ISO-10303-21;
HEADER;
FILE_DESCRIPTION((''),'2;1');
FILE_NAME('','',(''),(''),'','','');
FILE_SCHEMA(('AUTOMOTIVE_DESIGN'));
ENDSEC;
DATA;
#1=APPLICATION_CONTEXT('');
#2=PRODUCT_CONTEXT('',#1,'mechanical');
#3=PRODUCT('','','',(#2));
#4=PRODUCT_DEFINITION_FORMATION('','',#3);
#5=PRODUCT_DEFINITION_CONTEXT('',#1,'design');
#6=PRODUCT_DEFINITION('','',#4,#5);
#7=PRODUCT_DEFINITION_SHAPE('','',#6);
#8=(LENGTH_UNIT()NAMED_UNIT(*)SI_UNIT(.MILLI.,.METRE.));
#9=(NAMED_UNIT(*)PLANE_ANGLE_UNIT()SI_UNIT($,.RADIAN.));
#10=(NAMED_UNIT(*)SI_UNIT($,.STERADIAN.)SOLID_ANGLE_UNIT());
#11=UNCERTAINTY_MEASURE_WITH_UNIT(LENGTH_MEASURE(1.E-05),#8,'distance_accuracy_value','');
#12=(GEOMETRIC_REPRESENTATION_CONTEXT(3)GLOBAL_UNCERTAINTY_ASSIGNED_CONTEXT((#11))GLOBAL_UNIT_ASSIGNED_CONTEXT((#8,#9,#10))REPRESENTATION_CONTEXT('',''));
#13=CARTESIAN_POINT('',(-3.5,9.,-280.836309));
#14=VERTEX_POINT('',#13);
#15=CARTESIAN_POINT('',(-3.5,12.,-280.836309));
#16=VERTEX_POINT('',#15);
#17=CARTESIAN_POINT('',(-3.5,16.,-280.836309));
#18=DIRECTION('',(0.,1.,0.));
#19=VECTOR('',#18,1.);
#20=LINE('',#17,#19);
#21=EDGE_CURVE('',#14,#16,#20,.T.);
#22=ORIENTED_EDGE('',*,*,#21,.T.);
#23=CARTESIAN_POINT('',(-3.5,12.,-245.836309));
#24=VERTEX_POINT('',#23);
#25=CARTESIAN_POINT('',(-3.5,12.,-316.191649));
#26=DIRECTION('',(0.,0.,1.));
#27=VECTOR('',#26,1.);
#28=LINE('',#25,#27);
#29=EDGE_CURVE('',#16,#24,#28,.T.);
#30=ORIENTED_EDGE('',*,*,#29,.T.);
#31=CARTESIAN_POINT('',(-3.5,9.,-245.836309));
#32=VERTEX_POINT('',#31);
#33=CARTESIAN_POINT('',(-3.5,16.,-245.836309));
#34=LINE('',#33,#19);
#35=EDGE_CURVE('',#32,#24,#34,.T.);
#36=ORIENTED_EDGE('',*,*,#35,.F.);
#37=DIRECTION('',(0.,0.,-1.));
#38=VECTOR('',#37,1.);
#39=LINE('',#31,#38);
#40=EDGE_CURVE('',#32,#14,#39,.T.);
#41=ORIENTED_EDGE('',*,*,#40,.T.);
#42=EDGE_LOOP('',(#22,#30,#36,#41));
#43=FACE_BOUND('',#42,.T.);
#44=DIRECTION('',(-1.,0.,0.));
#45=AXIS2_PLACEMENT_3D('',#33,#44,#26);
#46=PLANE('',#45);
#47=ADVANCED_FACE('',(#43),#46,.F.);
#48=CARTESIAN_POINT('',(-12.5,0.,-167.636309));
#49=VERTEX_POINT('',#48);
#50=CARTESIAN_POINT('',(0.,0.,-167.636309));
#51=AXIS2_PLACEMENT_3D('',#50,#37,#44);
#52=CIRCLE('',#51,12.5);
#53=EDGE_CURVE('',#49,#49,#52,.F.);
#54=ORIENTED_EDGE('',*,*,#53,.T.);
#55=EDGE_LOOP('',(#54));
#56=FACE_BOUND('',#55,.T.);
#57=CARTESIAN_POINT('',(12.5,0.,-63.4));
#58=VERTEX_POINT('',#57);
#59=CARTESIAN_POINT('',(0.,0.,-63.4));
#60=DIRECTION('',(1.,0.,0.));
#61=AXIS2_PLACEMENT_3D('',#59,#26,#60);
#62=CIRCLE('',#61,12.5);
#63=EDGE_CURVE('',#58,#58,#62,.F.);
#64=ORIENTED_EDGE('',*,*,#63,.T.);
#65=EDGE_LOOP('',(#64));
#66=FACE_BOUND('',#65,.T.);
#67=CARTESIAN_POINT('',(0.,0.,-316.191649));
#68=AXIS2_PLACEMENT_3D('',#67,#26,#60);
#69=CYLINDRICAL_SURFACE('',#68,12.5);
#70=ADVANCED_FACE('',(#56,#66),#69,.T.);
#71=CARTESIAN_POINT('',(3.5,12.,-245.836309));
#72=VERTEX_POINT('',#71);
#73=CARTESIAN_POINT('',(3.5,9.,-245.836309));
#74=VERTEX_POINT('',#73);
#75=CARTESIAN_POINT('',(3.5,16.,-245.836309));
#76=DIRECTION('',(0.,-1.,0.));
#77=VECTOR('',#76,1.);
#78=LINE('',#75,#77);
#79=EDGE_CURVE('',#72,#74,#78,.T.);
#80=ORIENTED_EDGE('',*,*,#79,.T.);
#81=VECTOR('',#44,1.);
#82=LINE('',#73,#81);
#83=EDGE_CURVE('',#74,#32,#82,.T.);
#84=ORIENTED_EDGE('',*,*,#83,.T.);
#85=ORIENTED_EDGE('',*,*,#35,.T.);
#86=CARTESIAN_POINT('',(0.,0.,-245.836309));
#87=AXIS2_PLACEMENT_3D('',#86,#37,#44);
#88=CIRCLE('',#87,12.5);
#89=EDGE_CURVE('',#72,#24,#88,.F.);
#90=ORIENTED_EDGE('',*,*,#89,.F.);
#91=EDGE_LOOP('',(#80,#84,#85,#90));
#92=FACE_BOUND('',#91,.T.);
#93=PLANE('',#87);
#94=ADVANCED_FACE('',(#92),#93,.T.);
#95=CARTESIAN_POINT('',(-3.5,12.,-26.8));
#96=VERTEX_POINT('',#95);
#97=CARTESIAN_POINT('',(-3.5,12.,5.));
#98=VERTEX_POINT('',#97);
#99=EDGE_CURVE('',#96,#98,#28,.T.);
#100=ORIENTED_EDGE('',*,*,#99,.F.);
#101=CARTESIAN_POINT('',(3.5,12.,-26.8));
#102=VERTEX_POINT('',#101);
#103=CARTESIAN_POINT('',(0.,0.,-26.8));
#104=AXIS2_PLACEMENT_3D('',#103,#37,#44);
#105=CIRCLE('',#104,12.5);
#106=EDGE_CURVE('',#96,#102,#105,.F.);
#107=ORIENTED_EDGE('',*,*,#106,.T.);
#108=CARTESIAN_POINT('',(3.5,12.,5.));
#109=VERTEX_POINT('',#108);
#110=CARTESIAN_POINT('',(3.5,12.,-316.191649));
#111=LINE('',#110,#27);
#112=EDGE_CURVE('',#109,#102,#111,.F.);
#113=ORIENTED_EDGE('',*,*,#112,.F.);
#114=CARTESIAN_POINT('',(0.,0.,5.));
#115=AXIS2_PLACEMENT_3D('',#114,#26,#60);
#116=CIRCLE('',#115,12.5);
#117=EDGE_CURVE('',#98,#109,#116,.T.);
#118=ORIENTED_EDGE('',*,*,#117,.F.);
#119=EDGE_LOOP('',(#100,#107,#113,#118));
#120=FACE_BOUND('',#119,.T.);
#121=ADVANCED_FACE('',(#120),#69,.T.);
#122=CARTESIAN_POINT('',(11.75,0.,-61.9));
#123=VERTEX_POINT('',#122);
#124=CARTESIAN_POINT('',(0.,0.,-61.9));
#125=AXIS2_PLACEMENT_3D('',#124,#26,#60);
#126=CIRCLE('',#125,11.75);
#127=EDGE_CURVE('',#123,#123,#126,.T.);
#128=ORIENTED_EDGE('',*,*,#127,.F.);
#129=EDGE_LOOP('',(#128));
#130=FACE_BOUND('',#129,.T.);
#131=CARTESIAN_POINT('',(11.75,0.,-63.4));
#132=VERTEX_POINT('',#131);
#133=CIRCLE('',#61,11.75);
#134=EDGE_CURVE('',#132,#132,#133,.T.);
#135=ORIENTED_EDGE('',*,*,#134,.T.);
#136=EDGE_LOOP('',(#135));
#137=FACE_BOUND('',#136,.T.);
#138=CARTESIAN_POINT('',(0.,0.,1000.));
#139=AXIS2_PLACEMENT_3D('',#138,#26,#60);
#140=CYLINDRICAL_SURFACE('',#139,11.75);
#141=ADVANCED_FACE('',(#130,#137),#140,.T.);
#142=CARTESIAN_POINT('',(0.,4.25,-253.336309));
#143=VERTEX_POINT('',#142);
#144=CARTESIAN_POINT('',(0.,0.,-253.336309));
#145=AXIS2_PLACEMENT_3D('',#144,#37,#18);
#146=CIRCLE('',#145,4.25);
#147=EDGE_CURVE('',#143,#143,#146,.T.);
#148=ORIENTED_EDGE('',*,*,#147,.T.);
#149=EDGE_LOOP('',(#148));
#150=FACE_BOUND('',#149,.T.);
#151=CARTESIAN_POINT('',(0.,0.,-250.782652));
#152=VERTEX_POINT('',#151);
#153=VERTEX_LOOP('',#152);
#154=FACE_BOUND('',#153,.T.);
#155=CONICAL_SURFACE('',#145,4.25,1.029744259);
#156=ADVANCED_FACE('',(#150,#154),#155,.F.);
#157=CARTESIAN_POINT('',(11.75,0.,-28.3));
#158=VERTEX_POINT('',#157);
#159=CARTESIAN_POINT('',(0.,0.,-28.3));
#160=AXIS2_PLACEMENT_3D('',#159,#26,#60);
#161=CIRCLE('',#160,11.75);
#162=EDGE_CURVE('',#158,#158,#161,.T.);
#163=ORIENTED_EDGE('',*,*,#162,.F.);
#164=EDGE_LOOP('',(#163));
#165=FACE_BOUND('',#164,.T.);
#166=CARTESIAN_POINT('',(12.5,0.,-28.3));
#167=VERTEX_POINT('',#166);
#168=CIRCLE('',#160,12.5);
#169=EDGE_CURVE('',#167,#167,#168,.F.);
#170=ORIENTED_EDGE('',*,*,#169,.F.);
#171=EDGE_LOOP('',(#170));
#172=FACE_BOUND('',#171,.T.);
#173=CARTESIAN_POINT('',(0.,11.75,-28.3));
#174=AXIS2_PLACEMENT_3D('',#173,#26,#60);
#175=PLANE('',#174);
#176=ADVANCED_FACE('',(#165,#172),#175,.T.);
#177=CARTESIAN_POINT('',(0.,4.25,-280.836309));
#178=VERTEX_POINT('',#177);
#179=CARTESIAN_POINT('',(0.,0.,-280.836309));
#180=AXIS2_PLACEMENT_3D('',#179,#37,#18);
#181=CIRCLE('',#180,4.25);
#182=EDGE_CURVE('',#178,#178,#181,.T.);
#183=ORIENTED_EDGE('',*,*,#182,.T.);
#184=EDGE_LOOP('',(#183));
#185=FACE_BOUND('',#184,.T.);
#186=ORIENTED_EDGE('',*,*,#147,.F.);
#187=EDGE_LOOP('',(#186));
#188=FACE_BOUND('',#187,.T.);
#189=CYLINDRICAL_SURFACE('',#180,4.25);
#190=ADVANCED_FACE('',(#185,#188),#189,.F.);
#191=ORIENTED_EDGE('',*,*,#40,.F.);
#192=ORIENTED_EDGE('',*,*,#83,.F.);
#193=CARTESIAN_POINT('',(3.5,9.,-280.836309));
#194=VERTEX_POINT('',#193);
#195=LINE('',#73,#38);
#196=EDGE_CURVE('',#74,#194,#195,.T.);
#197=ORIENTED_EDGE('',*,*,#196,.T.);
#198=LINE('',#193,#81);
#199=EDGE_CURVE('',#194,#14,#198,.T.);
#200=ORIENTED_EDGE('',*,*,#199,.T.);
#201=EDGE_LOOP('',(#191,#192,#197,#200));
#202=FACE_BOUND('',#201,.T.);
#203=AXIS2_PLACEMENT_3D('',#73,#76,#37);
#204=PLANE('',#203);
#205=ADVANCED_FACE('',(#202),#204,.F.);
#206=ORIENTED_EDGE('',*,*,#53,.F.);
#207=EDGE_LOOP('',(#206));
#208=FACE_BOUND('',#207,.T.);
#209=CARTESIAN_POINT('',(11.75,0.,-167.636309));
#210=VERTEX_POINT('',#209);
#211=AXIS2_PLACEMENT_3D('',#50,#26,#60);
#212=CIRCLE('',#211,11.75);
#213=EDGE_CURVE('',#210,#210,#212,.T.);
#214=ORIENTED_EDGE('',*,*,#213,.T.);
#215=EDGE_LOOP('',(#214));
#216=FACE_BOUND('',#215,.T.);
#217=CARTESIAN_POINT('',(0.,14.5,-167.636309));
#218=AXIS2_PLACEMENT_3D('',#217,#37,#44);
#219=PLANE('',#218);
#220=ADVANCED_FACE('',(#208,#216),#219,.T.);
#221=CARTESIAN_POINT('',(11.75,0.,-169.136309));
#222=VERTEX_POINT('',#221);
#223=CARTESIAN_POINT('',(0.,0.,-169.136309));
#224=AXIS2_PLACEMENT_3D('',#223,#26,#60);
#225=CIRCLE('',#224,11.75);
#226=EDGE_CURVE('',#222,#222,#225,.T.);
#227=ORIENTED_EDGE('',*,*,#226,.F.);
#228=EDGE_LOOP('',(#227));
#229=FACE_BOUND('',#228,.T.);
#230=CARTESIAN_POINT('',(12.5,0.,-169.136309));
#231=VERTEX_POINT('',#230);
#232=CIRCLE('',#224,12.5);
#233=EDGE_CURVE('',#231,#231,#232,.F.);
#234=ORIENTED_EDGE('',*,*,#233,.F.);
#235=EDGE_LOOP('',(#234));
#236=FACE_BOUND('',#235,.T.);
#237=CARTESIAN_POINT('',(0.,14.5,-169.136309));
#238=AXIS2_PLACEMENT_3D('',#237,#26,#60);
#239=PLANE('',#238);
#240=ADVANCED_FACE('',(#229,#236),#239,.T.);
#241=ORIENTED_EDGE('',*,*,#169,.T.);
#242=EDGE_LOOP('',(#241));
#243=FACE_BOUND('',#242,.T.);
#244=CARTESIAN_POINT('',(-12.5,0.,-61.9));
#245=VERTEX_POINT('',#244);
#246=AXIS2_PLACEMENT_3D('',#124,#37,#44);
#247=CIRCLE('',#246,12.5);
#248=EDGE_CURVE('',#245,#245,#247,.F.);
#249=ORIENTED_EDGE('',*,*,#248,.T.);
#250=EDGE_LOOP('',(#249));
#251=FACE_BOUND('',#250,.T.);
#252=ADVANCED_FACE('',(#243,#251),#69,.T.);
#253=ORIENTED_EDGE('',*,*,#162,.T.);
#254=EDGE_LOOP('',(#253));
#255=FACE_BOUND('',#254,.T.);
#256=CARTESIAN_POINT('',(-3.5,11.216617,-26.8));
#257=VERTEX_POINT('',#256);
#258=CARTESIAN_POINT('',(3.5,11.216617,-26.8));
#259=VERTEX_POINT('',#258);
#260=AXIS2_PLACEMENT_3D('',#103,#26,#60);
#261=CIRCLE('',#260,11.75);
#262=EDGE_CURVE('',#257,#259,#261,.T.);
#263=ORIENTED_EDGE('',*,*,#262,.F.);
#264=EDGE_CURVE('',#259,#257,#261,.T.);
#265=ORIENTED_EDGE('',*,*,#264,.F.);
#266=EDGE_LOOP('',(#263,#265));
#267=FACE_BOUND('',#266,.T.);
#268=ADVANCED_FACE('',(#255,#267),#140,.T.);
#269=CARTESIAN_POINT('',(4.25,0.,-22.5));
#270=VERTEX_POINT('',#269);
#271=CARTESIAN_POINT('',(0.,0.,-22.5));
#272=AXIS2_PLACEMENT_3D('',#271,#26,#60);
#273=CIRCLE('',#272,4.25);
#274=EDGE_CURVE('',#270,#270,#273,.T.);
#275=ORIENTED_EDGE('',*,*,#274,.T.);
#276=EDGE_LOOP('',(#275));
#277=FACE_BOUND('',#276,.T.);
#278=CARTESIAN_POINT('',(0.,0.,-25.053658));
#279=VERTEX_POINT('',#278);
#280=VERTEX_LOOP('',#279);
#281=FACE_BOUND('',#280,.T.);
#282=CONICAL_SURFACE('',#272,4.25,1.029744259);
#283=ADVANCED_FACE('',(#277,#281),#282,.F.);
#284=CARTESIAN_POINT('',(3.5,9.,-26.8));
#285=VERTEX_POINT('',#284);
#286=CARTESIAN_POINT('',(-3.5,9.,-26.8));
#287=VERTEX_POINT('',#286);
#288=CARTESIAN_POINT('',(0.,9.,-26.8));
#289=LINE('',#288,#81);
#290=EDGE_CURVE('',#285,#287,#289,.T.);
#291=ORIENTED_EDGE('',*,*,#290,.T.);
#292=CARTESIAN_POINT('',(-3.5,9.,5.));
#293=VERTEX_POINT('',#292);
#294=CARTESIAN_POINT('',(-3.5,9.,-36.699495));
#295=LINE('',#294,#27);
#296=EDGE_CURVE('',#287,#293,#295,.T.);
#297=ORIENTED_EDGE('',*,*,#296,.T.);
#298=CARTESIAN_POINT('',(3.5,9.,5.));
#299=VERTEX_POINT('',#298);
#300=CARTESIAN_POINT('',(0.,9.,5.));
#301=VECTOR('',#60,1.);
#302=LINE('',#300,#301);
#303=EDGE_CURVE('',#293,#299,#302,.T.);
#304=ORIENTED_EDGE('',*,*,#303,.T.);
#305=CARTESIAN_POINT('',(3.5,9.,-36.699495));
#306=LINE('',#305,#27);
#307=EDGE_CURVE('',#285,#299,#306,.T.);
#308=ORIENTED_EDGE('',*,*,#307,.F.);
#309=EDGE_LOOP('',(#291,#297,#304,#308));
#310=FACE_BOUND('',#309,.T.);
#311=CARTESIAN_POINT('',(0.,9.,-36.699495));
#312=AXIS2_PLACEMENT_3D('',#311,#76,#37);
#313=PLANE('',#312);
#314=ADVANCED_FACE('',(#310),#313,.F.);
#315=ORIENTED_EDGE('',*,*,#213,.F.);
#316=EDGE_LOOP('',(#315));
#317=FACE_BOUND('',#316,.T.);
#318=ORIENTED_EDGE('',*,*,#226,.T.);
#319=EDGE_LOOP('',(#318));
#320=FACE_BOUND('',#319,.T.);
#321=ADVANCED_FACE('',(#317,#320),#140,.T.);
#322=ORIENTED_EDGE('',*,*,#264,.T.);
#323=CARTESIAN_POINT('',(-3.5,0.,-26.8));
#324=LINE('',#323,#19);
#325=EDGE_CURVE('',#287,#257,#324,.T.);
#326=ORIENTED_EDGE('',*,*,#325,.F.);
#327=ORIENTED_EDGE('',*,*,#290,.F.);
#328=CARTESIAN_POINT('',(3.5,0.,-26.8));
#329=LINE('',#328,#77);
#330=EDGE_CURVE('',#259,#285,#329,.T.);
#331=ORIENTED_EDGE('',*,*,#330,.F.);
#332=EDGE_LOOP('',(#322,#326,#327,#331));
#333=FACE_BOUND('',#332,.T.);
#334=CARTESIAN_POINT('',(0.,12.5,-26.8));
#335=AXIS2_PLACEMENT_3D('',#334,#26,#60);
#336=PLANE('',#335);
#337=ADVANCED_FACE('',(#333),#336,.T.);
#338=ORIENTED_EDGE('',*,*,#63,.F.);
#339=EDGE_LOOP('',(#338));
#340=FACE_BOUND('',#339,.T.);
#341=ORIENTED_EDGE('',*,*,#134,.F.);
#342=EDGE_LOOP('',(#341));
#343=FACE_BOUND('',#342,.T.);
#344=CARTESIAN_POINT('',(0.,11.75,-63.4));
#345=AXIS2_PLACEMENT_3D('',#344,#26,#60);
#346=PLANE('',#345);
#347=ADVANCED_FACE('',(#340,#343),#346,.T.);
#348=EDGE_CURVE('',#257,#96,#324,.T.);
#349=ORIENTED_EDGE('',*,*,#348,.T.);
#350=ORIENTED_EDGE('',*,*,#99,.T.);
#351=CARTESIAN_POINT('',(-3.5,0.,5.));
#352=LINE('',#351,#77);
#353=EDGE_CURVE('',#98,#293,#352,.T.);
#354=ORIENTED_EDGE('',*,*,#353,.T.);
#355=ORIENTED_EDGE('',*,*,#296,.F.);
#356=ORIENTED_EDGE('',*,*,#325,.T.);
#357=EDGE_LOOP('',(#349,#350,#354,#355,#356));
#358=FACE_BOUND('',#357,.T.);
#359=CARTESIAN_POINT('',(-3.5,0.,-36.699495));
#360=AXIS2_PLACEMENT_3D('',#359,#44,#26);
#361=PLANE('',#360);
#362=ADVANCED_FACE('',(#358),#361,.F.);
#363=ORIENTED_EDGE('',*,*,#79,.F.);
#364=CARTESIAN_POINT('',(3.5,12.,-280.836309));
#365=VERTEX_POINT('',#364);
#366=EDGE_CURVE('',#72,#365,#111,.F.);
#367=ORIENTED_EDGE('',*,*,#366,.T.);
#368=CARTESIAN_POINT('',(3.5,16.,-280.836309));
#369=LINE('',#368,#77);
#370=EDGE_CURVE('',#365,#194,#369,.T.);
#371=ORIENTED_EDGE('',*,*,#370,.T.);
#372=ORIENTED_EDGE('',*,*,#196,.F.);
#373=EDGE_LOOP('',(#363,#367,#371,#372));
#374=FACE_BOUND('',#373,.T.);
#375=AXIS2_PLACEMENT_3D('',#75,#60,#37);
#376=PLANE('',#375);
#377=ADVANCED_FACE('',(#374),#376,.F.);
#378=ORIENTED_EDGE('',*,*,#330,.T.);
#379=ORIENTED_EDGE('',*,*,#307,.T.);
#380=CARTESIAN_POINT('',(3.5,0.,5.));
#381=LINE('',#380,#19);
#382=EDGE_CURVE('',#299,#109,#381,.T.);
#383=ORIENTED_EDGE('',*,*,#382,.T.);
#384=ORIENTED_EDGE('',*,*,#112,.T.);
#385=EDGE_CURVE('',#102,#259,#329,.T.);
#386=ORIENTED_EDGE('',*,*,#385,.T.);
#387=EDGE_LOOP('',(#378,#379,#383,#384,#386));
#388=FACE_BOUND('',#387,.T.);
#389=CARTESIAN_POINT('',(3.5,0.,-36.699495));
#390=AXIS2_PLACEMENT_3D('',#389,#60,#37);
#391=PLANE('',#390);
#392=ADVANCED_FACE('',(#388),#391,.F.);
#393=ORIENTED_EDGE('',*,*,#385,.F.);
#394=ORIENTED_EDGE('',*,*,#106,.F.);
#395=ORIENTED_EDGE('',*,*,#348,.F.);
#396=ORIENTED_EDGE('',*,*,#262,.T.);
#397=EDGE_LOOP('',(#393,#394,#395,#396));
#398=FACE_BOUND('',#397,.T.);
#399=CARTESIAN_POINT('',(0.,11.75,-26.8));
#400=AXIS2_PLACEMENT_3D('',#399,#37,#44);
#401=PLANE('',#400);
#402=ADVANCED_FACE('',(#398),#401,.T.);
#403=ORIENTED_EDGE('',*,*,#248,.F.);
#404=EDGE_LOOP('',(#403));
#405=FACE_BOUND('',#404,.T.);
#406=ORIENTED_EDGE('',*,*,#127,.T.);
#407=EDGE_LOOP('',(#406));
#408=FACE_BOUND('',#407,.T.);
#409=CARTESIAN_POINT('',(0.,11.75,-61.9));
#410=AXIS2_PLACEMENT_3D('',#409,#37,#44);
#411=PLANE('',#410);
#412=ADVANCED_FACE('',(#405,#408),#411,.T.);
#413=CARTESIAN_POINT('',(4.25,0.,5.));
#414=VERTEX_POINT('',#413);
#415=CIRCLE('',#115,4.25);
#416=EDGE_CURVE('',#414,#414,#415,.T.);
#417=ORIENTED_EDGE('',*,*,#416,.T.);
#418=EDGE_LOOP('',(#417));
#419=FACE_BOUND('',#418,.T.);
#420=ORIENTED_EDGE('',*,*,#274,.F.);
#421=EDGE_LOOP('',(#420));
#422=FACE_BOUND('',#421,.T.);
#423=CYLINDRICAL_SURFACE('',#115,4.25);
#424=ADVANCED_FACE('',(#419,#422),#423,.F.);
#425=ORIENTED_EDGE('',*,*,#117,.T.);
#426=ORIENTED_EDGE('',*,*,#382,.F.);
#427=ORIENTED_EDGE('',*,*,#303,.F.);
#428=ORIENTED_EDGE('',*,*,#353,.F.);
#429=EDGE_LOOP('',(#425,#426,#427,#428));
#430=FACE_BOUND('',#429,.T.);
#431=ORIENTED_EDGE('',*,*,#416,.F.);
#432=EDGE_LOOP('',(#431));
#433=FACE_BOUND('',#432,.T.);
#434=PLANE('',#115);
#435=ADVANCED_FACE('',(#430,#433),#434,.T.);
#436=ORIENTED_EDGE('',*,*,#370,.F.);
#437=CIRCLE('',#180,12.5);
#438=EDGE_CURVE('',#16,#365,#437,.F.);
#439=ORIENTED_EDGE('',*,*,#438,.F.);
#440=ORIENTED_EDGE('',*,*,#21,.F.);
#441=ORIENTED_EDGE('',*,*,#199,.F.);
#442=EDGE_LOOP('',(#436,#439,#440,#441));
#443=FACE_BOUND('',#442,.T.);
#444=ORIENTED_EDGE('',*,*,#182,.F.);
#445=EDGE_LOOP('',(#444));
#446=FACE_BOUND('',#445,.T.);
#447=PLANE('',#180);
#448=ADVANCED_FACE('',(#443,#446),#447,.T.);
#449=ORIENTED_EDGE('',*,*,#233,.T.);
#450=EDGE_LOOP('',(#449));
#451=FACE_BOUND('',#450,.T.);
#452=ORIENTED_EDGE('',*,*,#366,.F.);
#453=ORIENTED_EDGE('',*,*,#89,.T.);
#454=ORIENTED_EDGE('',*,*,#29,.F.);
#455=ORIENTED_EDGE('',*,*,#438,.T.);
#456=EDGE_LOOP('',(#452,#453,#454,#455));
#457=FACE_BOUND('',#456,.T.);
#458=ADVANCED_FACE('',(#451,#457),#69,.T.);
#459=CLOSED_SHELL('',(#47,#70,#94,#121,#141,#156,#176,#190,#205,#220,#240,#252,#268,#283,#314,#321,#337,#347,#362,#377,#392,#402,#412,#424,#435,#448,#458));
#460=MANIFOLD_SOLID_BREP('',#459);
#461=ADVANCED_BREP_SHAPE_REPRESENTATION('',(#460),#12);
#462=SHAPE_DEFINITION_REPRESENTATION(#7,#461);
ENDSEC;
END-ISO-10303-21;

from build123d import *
from OCP.BRepAlgoAPI import BRepAlgoAPI_Cut
from OCP.TopTools import TopTools_ListOfShape

# Parameters (mm, degrees)
EXTRUDE_1_DEPTH        = 5
EXTRUDE_1_DEPTH_BACK   = 280.836309
SKETCH_1_R             = 12.5
HOLE_WIZARD_M101_D     = 8.5
HOLE_WIZARD_M101_DEPTH = 27.5
HOLE_WIZARD_M101_TIP   = 2.553657631
SKETCH_6_W             = 7
SKETCH_6_H             = 7
CUT_EXTRUDE_1_DEPTH    = 35
SKETCH_7_W             = 1.5
SKETCH_7_H             = 2.75
CUT_EXTRUDE_START      = -285.836309
SKETCH_6_2_W           = 7
SKETCH_6_2_H           = 7
CUT_EXTRUDE_2_DEPTH    = 31.8
HOLE_WIZARD_M102_D     = 8.5
HOLE_WIZARD_M102_DEPTH = 27.5
HOLE_WIZARD_M102_TIP   = 2.553657631


with BuildPart() as part:
    # Эскиз1 → Бобышка-Вытянуть1 (new, two sides: drawn at the far end of the back side and taken through both)
    with BuildSketch(Plane.XY.offset(-EXTRUDE_1_DEPTH_BACK)):
        Circle(SKETCH_1_R)
    extrude(amount=EXTRUDE_1_DEPTH + EXTRUDE_1_DEPTH_BACK)

    # Отверстие обработанное метчиком M101
    with Locations(Plane(origin=(0, 0, -280.836309448), x_dir=(-1, 0, 0), z_dir=(0, 0, -1))):
        with Locations((0, 0)):
            Hole(HOLE_WIZARD_M101_D / 2, depth=HOLE_WIZARD_M101_DEPTH)
            with Locations((0, 0, -(HOLE_WIZARD_M101_DEPTH + HOLE_WIZARD_M101_TIP / 2))):  # 118° drill point
                Cone(0, HOLE_WIZARD_M101_D / 2, HOLE_WIZARD_M101_TIP, mode=Mode.SUBTRACT)

    # Эскиз6 → Вырез-Вытянуть1 (cut)
    with BuildSketch(Plane(origin=(0, 0, -280.836309448), x_dir=(-1, 0, 0), z_dir=(0, 0, -1))):
        with Locations((0, 12.5)):
            Rectangle(SKETCH_6_W, SKETCH_6_H)
    extrude(amount=-CUT_EXTRUDE_1_DEPTH, mode=Mode.SUBTRACT)

    # Эскиз7 → Вырез-Повернуть1 (revolve, cut)
    with BuildSketch(Plane(origin=(0, 0, 0), x_dir=(0, 0, -1), z_dir=(1, 0, 0)), mode=Mode.PRIVATE) as cut_revolve_1_sk:
        with Locations((62.65, 13.125)):
            Rectangle(SKETCH_7_W, SKETCH_7_H)
        with Locations((27.55, 13.125)):
            Rectangle(SKETCH_7_W, SKETCH_7_H)
        with Locations((168.386309448, 13.125)):
            Rectangle(SKETCH_7_W, SKETCH_7_H)
    revolve(cut_revolve_1_sk.sketch.rotate(Axis((0, 0, 1000), (0, 0, -1)), 90), axis=Axis((0, 0, 1000), (0, 0, -1)), mode=Mode.SUBTRACT)


with BuildPart() as cut_extrude_2_tool:
    # Эскиз6<2> → Вырез-Вытянуть2 (new body)
    with BuildSketch(Plane(origin=(0, 0, -280.836309448), x_dir=(-1, 0, 0), z_dir=(0, 0, -1)).offset(CUT_EXTRUDE_START)):
        with Locations((0, 12.5)):
            Rectangle(SKETCH_6_2_W, SKETCH_6_2_H)
    extrude(amount=CUT_EXTRUDE_2_DEPTH)


with BuildPart() as part_1:
    add(part.part)

    # Вырез-Вытянуть2: cut by cut_extrude_2_tool, with a tolerance
    cut_extrude_2_stock = TopTools_ListOfShape()
    cut_extrude_2_stock.Append(part_1.part.wrapped)
    cut_extrude_2_tools = TopTools_ListOfShape()
    cut_extrude_2_tools.Append(cut_extrude_2_tool.part.wrapped)
    cut_extrude_2_cut = BRepAlgoAPI_Cut()
    cut_extrude_2_cut.SetArguments(cut_extrude_2_stock)
    cut_extrude_2_cut.SetTools(cut_extrude_2_tools)
    cut_extrude_2_cut.SetFuzzyValue(0.00001)
    cut_extrude_2_cut.Build()
    add(Compound.cast(cut_extrude_2_cut.Shape()).solids(), mode=Mode.REPLACE)

    # Отверстие обработанное метчиком M102
    with Locations(Plane.XY.offset(5)):
        with Locations((0, 0)):
            Hole(HOLE_WIZARD_M102_D / 2, depth=HOLE_WIZARD_M102_DEPTH)
            with Locations((0, 0, -(HOLE_WIZARD_M102_DEPTH + HOLE_WIZARD_M102_TIP / 2))):  # 118° drill point
                Cone(0, HOLE_WIZARD_M102_D / 2, HOLE_WIZARD_M102_TIP, mode=Mode.SUBTRACT)


solid = part_1.part
